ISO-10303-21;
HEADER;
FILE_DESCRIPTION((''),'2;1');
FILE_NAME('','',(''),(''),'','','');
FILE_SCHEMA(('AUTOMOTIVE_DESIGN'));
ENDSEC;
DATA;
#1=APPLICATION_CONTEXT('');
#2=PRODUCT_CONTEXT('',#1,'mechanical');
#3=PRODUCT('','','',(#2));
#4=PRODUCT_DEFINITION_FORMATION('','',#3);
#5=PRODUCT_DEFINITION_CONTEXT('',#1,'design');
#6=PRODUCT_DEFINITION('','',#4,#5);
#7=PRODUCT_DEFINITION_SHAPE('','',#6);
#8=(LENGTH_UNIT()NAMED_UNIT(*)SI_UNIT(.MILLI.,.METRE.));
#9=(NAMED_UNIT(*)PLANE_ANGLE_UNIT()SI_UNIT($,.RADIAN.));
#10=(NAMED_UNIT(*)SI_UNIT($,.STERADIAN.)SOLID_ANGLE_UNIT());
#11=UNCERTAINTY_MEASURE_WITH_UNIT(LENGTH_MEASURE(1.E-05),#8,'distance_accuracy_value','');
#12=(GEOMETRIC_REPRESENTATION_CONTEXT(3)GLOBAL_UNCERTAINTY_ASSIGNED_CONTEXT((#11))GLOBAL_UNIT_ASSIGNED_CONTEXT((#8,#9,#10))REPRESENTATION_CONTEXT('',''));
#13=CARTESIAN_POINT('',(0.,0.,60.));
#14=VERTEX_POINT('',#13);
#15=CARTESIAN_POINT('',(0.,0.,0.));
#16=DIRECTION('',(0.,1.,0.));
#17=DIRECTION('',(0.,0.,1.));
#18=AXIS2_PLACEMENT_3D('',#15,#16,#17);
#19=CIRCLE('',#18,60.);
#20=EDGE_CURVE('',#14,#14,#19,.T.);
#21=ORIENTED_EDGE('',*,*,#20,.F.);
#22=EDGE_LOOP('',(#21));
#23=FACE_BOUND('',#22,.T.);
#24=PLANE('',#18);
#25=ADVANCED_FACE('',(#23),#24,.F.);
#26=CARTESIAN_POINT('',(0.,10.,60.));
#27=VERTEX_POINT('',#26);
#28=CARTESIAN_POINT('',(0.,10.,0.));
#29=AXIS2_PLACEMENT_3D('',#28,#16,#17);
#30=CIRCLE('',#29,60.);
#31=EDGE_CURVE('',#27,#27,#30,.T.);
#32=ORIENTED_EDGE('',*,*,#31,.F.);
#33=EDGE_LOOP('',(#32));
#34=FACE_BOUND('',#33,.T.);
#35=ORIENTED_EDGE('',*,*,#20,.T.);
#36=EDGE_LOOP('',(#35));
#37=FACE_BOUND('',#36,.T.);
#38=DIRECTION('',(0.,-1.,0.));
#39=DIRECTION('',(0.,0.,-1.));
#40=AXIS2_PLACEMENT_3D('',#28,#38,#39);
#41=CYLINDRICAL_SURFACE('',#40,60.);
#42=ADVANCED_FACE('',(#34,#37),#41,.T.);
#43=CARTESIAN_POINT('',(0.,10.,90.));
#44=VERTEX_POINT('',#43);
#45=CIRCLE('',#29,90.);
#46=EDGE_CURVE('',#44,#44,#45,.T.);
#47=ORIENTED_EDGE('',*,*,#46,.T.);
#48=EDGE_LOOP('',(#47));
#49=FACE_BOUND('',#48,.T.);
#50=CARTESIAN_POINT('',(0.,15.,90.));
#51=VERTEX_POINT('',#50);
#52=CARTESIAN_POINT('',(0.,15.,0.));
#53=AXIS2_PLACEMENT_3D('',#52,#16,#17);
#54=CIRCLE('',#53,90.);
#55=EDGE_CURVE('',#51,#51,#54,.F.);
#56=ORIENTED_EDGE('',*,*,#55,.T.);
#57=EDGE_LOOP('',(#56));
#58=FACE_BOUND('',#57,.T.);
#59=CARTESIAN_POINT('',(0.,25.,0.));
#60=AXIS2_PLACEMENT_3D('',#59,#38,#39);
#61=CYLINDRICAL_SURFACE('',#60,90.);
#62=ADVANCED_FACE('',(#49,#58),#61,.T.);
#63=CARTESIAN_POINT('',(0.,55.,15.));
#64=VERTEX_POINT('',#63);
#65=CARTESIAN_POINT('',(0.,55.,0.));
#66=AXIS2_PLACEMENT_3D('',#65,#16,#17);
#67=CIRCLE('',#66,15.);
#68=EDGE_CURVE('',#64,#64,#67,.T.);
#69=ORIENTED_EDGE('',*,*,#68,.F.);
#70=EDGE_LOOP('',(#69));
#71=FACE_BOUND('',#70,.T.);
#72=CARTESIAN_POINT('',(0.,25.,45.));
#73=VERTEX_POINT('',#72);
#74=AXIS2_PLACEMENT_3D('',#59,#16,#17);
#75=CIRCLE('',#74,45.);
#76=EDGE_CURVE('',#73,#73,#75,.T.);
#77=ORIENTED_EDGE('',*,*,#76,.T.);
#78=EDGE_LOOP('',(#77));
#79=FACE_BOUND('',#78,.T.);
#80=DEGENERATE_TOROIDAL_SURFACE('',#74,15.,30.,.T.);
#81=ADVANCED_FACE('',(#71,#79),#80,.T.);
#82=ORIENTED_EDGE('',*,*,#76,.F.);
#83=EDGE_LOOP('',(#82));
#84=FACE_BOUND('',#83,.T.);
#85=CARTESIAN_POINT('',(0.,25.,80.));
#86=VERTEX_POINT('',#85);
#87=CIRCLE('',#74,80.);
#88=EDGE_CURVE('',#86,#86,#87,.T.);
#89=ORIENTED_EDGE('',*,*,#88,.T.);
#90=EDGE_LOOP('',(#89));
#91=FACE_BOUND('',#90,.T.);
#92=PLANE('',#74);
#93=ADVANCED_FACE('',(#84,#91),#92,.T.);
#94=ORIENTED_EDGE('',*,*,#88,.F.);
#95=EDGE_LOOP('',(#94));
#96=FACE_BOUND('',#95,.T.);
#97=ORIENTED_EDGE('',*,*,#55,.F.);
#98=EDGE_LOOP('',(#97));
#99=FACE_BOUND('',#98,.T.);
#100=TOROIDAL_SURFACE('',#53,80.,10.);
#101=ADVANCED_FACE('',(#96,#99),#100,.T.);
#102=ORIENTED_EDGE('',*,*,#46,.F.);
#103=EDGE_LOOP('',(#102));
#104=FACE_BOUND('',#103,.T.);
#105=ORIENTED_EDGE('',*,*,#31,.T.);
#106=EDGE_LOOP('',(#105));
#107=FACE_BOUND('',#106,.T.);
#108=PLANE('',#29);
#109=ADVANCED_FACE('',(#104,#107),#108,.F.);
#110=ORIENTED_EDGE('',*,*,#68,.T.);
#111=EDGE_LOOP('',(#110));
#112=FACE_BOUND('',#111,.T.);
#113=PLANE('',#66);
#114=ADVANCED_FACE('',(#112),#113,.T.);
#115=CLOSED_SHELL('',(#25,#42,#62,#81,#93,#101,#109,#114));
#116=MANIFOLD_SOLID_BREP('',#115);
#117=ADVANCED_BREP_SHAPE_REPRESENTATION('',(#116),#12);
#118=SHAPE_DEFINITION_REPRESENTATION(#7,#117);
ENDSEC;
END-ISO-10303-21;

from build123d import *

# Parameters (mm, degrees)
SKETCH1_R           = 60
BOSS_EXTRUDE1_DEPTH = 10
SKETCH2_R           = 90
BOSS_EXTRUDE2_DEPTH = 15
SKETCH3_R           = 45
BOSS_EXTRUDE3_DEPTH = 30
FILLET1_R           = 10
FILLET2_R           = 30


with BuildPart() as part:
    # Sketch1 → Boss-Extrude1 (new body)
    with BuildSketch(Plane(origin=(0, 0, 0), x_dir=(1, 0, 0), z_dir=(0, 1, 0))):
        with Locations(Location((0, 0, 0), (0, 0, 270))):
            Circle(SKETCH1_R)
    extrude(amount=BOSS_EXTRUDE1_DEPTH)

    # Sketch2 → Boss-Extrude2 (add)
    with BuildSketch(Plane(origin=(0, 10, 0), x_dir=(1, 0, 0), z_dir=(0, 1, 0))):
        with Locations(Location((0, 0, 0), (0, 0, 270))):
            Circle(SKETCH2_R)
    extrude(amount=BOSS_EXTRUDE2_DEPTH)

    # Sketch3 → Boss-Extrude3 (add)
    with BuildSketch(Plane(origin=(0, 25, 0), x_dir=(1, 0, 0), z_dir=(0, 1, 0))):
        with Locations(Location((0, 0, 0), (0, 0, 270))):
            Circle(SKETCH3_R)
    extrude(amount=BOSS_EXTRUDE3_DEPTH)

    # Fillet1
    fillet1_edges = [part.edges().sort_by_distance(p)[0] for p in [
        (0, 25, -90),
    ]]
    fillet(fillet1_edges, radius=FILLET1_R)

    # Fillet2
    fillet2_edges = [part.edges().sort_by_distance(p)[0] for p in [
        (0, 55, -45),
    ]]
    fillet(fillet2_edges, radius=FILLET2_R - 0.0001)  # a hair under: the kernel refuses the full size


solid = part.part
